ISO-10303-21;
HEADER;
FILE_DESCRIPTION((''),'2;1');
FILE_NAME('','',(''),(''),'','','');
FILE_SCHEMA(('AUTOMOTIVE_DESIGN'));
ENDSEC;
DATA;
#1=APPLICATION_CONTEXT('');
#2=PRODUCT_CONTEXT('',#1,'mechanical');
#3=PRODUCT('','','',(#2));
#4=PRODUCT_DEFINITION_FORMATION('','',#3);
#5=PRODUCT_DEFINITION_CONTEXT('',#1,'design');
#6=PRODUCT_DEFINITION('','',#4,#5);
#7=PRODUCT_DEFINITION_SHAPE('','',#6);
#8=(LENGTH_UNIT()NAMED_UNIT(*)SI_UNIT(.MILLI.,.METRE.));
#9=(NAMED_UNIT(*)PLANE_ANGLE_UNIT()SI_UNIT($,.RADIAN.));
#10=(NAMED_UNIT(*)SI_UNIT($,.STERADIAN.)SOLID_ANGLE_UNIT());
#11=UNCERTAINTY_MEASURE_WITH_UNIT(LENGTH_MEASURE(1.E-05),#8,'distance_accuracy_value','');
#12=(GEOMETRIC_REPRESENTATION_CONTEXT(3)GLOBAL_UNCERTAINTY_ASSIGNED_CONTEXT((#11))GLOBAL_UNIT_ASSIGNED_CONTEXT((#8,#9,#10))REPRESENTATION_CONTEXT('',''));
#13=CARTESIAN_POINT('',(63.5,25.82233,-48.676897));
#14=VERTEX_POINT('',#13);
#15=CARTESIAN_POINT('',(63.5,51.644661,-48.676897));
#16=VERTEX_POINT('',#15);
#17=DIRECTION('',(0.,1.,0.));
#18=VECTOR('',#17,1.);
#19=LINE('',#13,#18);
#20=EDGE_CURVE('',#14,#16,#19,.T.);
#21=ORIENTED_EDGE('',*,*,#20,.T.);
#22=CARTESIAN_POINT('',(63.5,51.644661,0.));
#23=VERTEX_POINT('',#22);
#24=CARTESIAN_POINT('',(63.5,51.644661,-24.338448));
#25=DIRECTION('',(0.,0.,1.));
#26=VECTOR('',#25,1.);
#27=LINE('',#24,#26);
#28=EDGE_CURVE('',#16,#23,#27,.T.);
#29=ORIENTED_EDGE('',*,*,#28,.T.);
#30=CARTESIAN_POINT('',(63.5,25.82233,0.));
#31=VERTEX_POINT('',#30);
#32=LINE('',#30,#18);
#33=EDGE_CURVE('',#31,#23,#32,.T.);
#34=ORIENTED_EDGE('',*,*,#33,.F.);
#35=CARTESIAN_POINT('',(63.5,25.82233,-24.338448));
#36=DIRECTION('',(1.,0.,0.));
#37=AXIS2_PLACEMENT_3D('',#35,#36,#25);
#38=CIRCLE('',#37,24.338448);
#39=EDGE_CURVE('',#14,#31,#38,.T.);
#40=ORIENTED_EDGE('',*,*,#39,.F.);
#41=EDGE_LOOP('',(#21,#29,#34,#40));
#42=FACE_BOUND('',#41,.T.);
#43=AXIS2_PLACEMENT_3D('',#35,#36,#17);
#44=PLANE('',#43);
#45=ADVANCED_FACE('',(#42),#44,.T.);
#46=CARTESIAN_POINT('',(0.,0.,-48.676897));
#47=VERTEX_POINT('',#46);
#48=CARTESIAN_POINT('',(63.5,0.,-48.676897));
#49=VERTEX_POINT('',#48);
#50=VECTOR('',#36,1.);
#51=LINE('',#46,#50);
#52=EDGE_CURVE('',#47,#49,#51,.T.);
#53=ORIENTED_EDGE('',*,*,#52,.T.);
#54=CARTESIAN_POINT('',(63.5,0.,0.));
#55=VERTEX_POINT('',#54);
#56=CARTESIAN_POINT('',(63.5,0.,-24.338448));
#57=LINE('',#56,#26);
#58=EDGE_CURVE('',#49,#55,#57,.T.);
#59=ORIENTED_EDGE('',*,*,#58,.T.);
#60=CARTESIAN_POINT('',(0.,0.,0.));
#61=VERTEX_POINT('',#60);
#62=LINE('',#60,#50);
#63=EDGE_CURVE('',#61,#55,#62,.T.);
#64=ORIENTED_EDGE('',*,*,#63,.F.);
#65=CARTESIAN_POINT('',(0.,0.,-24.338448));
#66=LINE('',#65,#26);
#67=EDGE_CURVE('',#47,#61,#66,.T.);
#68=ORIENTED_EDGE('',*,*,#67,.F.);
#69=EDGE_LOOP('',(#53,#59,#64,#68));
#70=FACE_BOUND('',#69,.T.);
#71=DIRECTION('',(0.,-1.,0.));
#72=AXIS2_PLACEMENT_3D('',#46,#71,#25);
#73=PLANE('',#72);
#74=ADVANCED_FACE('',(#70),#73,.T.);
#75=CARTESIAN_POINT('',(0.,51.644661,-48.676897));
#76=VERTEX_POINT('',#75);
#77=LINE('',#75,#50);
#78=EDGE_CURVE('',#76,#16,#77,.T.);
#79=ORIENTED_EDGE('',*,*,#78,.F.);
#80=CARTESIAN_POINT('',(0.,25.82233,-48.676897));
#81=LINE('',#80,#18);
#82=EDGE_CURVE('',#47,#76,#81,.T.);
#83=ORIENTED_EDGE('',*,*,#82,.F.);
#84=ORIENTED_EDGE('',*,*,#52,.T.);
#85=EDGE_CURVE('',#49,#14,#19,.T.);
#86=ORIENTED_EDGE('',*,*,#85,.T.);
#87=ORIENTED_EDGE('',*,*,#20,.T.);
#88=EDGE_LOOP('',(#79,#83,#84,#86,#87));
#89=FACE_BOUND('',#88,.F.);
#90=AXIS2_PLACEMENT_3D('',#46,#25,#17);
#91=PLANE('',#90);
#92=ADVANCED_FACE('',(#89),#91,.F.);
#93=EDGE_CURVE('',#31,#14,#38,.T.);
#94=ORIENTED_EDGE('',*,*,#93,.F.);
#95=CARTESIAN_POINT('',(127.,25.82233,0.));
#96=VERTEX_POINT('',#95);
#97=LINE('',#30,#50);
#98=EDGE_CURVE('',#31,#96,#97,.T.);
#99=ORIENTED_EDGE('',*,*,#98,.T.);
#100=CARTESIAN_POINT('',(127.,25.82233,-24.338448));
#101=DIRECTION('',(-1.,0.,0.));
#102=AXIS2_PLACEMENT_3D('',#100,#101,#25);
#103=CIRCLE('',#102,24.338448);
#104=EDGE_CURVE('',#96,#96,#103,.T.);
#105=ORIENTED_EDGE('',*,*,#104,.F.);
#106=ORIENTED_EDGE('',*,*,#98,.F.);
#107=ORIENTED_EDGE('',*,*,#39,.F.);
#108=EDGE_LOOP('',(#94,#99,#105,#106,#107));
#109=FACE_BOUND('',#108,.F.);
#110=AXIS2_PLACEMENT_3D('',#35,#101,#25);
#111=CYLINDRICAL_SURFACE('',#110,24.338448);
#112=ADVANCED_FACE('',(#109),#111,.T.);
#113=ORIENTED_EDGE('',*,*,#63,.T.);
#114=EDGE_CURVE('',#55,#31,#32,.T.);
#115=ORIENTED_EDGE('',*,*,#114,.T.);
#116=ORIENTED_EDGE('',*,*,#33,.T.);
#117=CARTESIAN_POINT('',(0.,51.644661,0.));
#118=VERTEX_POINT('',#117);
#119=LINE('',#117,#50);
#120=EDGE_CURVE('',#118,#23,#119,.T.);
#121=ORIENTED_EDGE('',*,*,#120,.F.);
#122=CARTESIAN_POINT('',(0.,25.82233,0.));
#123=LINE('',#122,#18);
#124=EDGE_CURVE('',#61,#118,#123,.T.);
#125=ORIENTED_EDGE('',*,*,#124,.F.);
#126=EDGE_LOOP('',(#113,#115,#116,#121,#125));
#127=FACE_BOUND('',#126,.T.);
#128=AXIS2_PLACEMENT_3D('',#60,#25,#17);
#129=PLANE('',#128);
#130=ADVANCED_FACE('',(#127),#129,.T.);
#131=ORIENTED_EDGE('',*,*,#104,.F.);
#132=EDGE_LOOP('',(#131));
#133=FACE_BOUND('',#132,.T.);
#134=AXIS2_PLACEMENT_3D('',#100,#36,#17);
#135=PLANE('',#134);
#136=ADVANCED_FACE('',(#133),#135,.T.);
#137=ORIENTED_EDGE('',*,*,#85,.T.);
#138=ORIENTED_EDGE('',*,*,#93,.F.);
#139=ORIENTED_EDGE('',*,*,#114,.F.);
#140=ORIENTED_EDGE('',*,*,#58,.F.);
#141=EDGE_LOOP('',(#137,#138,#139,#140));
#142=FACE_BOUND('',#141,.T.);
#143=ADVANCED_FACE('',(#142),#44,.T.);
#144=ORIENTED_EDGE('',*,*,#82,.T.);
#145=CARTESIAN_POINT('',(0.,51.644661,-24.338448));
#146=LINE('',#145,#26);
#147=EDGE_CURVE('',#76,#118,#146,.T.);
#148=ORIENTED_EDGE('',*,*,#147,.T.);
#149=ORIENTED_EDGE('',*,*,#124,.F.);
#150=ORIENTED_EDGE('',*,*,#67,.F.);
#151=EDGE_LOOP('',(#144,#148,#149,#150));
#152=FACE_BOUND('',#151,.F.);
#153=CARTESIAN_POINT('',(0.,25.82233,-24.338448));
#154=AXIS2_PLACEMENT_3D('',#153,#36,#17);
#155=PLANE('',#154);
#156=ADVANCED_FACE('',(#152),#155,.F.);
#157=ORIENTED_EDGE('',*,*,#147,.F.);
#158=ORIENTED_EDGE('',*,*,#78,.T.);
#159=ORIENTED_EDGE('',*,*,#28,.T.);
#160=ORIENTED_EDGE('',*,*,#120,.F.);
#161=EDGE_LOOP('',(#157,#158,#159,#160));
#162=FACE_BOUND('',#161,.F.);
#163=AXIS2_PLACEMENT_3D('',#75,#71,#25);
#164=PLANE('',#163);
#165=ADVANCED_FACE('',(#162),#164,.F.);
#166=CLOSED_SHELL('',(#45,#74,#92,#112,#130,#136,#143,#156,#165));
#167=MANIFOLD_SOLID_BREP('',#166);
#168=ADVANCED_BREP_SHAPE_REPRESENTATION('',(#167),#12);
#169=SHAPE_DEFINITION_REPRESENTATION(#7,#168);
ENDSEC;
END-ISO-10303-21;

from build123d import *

# Parameters (mm, degrees)
F0_W     = 51.6446605325
F0_H     = 48.6768968403
F1_DEPTH = 63.5
F3_DEPTH = 63.5
F4_R     = 24.3384484202
F6_DEPTH = 25.399999693


# Not quite as in the source:
# - the program builds the solid bodies; features that only make, move or delete a surface that nothing else refers to are left out


with BuildPart() as f1:
    # F0 (on Right) → F1 (new body)
    with BuildSketch(Plane.YZ):
        with Locations((25.8223302662, -24.3384484202)):
            Rectangle(F0_W, F0_H)
    extrude(amount=F1_DEPTH)

    # F2 (on face) → F3 (join)
    with BuildSketch(Plane.YZ.offset(63.5)):
        with BuildLine():
            ThreePointArc((25.8223302662, -48.6768968403), (43.0322121877, -41.5483303416), (50.1607786864, -24.3384484202))
            ThreePointArc((50.1607786864, -24.3384484202), (43.0322121877, -7.1285664987), (25.8223302662, 0))
            ThreePointArc((25.8223302662, 0), (1.4838818461, -24.3384484202), (25.8223302662, -48.6768968403))
        make_face()
    extrude(amount=F3_DEPTH)

    # F4 (on face) + F5 (on face) → F6 (cut)
    with BuildSketch(Plane.YZ.offset(127)):
        with Locations((25.8223302662, -24.3384484202)):
            Circle(F4_R)
    with BuildSketch(Plane.YZ.offset(127)):
        with BuildLine():
            add(Edge.make_bspline(
                [(24.2070443928, -3.5950578749), (13.7185256549, -3.5950578749), (18.9627850239, -34.8861049861), (24.2070443928, -66.1771520972), (29.4513037618, -34.8861049861), (34.6955631307, -3.5950578749), (24.2070443928, -3.5950578749)],
                knots=[0, 0, 0, 2.0943951024, 2.0943951024, 4.1887902048, 4.1887902048, 6.2831853072, 6.2831853072, 6.2831853072], degree=2, weights=[1, 0.5, 1, 0.5, 1, 0.5, 1]))
        make_face()
    extrude(amount=F6_DEPTH, mode=Mode.SUBTRACT)


solid = f1.part
